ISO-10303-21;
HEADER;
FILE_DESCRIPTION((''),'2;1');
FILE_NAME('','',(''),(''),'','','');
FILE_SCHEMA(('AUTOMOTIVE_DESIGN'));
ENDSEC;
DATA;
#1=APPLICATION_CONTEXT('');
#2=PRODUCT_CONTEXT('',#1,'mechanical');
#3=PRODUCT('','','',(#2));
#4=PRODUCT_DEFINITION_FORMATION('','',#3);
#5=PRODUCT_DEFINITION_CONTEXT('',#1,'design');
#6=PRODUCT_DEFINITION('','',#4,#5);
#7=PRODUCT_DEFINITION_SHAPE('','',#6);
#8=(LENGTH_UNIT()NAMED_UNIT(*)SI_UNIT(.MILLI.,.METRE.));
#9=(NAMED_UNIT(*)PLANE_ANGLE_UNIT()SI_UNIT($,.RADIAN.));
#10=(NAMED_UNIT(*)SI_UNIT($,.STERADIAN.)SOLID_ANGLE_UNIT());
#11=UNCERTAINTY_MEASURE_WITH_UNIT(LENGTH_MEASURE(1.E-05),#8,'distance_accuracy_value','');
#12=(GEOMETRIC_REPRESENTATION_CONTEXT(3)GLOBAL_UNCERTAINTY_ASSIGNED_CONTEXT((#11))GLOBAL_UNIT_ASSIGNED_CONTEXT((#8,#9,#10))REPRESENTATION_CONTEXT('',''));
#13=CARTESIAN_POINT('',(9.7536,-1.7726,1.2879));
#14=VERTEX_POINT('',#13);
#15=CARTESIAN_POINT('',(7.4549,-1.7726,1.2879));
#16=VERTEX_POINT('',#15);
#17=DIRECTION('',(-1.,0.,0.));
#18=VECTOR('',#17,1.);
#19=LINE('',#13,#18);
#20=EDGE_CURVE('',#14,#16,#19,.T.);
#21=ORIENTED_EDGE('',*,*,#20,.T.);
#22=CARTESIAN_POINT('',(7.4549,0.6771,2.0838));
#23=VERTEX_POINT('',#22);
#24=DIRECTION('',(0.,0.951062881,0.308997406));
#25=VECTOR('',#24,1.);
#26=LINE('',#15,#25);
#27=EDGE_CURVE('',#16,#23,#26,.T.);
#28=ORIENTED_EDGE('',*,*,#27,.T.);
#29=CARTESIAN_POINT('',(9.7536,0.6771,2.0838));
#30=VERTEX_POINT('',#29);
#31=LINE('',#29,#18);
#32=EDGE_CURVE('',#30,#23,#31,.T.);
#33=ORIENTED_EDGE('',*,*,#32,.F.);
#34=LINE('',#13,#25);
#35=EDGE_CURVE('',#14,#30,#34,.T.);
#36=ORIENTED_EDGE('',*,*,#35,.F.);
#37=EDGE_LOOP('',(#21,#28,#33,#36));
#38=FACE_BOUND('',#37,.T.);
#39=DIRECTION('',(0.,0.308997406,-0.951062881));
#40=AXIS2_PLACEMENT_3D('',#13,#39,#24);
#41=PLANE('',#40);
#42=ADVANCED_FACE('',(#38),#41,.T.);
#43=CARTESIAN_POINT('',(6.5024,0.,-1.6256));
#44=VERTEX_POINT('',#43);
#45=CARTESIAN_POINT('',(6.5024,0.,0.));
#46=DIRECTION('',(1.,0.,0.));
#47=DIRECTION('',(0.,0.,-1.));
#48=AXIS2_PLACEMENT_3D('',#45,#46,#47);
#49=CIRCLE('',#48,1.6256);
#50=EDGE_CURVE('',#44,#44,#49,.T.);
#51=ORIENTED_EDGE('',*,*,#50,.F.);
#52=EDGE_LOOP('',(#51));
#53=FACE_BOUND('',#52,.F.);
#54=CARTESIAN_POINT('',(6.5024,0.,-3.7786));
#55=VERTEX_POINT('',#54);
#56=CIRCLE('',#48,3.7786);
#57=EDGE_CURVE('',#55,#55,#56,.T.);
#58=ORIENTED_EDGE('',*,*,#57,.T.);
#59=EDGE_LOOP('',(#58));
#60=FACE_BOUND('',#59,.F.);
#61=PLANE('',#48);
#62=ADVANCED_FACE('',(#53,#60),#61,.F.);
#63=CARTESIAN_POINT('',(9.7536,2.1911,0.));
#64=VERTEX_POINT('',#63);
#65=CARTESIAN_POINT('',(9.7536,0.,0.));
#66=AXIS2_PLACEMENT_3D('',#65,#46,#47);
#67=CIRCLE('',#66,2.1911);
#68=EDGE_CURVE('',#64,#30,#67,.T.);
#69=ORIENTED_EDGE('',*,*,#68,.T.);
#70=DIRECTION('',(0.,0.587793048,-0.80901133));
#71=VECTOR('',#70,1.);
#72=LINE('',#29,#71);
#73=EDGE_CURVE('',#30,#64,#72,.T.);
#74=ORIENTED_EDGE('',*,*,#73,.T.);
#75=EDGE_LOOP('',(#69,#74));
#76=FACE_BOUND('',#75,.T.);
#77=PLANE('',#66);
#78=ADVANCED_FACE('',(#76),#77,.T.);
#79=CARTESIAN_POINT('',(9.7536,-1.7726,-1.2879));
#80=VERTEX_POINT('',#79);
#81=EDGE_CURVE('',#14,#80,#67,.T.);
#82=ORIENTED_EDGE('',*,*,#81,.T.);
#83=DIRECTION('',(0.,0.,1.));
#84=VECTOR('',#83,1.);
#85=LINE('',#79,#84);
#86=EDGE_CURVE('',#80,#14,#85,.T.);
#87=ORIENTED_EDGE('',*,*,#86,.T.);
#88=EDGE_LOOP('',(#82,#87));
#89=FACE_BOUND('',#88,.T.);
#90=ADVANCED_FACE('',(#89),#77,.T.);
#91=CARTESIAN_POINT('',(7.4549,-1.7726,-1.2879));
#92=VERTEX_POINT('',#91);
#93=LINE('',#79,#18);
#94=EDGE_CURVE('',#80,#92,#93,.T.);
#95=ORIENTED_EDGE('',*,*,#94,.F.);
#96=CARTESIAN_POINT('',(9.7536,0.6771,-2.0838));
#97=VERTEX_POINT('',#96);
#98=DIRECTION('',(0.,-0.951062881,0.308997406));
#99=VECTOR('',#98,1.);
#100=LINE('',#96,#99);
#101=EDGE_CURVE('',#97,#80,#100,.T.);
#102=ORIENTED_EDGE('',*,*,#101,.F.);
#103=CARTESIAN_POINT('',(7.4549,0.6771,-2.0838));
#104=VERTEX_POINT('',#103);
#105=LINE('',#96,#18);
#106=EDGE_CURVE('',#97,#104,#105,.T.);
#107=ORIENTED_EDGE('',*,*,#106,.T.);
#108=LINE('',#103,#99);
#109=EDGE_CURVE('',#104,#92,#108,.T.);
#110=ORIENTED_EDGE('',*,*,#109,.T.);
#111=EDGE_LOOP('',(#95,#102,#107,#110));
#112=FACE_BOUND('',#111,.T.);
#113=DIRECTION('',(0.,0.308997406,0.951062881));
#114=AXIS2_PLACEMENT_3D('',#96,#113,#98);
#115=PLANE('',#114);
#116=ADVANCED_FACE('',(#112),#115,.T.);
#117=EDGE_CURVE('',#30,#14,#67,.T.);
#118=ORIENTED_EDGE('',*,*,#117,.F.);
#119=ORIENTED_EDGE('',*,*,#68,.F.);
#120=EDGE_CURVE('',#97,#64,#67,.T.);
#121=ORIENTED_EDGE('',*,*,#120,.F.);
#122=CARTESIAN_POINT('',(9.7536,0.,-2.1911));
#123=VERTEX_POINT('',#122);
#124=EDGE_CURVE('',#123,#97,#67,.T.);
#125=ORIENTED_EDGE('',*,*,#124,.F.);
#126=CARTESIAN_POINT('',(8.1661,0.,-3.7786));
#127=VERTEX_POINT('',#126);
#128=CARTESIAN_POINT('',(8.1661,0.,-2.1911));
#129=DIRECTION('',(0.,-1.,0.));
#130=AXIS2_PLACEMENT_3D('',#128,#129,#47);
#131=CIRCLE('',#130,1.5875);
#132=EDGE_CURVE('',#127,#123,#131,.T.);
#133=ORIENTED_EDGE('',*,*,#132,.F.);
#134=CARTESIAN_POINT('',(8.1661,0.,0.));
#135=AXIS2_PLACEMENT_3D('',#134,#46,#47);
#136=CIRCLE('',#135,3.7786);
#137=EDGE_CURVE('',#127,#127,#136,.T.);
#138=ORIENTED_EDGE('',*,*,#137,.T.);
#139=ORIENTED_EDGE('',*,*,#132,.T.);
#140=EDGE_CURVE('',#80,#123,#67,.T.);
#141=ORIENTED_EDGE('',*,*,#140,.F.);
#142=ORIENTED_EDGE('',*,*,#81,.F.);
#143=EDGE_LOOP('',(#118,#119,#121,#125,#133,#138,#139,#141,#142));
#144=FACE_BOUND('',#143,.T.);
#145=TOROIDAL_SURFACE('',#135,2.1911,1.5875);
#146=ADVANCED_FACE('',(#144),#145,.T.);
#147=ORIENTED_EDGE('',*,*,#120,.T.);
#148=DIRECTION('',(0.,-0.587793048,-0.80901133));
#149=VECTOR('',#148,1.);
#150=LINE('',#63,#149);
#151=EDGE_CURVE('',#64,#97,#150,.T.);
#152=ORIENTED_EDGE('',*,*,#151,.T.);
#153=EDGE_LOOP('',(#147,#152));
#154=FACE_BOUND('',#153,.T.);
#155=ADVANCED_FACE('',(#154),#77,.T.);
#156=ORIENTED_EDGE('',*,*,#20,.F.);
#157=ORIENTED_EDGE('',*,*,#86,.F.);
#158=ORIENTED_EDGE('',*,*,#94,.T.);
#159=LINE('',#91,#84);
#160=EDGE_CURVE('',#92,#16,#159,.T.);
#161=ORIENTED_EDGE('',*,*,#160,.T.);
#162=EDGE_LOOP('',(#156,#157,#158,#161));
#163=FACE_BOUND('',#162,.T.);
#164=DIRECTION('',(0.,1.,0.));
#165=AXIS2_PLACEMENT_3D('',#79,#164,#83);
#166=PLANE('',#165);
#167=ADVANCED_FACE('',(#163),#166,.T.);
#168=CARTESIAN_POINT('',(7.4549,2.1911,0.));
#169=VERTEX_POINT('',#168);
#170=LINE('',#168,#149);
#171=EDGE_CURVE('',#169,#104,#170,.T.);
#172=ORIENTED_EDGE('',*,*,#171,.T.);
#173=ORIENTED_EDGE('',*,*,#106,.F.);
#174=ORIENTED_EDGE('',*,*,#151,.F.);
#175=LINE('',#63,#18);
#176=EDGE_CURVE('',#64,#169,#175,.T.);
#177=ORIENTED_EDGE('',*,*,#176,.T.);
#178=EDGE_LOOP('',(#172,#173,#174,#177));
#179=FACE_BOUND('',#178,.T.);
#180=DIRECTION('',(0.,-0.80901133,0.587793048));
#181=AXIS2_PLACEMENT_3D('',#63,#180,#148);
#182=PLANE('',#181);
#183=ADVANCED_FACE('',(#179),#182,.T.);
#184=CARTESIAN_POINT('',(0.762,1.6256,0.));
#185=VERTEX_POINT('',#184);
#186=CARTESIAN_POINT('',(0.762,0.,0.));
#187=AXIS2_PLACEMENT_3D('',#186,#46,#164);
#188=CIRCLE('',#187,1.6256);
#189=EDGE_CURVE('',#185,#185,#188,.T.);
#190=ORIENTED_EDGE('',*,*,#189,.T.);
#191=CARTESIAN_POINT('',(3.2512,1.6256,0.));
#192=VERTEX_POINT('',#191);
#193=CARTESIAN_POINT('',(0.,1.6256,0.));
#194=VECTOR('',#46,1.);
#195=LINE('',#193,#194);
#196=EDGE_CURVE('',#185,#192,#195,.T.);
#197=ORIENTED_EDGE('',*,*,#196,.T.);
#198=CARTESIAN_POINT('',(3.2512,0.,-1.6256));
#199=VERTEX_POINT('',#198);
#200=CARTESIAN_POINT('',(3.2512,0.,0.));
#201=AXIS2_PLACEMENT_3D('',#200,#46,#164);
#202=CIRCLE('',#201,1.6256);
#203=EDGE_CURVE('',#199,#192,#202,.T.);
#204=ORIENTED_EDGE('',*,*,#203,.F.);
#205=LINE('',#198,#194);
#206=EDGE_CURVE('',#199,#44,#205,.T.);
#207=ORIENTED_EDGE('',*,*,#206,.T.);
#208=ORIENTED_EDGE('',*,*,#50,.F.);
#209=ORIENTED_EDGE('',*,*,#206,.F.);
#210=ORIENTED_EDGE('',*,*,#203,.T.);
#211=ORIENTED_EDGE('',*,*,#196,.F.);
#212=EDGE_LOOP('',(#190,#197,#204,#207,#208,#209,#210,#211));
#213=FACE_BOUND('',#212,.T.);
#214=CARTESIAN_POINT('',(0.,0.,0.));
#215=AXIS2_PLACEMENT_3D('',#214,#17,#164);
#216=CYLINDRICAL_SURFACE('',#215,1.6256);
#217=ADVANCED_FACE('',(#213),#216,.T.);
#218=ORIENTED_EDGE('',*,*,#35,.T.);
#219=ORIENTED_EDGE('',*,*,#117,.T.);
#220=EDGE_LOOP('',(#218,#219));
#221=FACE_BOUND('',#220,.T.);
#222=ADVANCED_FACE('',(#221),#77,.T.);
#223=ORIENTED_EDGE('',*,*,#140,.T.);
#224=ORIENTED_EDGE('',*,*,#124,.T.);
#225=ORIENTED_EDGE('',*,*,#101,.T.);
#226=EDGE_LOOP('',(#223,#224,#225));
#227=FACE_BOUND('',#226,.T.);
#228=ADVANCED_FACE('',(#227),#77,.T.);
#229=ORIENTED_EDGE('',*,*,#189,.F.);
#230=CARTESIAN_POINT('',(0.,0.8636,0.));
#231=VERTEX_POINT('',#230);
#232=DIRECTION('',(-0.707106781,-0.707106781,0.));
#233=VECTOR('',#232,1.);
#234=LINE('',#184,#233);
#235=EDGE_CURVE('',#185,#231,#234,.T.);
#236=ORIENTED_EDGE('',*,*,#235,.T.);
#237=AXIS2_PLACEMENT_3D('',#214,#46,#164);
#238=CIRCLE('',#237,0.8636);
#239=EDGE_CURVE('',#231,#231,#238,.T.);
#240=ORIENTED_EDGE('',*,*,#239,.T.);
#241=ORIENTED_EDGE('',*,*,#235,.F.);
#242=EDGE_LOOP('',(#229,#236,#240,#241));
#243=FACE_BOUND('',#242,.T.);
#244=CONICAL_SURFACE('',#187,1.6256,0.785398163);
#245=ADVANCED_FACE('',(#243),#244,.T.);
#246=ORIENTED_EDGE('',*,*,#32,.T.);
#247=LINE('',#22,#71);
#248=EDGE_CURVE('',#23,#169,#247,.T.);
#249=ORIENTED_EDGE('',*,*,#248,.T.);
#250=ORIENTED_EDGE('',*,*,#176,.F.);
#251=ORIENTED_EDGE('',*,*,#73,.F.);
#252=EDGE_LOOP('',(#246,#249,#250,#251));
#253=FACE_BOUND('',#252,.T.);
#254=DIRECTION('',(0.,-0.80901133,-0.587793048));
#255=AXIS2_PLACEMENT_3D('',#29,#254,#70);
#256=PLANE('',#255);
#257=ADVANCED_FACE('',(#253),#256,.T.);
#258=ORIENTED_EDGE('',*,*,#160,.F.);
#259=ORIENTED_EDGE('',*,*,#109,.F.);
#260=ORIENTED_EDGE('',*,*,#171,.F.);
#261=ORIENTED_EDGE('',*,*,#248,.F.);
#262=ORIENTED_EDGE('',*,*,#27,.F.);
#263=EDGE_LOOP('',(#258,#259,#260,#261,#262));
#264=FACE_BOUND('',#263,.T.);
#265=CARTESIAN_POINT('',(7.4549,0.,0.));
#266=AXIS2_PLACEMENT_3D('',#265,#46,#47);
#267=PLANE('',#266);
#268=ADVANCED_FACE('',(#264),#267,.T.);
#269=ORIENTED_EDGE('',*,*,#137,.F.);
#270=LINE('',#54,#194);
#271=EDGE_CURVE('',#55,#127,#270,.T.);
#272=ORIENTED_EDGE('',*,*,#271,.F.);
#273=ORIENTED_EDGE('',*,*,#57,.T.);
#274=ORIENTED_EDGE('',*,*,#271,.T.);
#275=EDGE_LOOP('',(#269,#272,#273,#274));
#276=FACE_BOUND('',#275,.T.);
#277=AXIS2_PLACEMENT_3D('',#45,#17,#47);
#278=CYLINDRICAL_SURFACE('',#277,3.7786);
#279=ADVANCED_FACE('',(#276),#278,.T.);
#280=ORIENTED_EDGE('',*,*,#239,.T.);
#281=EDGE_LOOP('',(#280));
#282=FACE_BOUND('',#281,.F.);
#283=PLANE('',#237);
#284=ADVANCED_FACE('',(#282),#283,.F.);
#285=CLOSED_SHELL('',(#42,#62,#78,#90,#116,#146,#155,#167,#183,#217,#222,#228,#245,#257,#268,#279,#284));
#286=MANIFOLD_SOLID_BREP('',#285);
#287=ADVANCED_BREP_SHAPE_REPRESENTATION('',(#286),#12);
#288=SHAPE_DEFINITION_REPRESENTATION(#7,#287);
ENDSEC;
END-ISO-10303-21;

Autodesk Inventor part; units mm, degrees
ref_plane "YZ Plane" through (0, 0, 0) normal (1, 0, 0) x (0, 1, 0)
ref_plane "XZ Plane" through (0, 0, 0) normal (0, 1, 0) x (-1, 0, 0)
ref_plane "XY Plane" through (0, 0, 0) normal (0, 0, 1) x (1, 0, 0)
sketch "Sketch1" plane through (0, 0, 0) normal (1, 0, 0) x (0, 1, 0)
  circle A0 centre (0, 0) radius 1.6256
  dimension "d0" = 3.2512
extrude "Extrusion1" add sketch "Sketch1" along normal blind 3.2512
thread "Thread1" size "6-32 UNC" class "2A" standard "ANSI Unified Screw Threads" full length
sketch "Sketch2" plane through (3.2512, 0, 0) normal (1, 0, 0) x (0, 0, -1)
  circle A0 centre (0, 0) radius 1.6256
extrude "Extrusion2" add sketch "Sketch2" along normal blind 3.2512
sketch "Sketch3" plane through (6.5024, 0, 0) normal (1, 0, 0) x (0, 0, -1)
  circle A0 centre (0, 0) radius 3.7786
extrude "Extrusion3" add sketch "Sketch3" along normal blind 3.2512
fillet "Fillet1" radius 1.5875 1 edges at (9.7536, 0, 3.7786)
sketch "Sketch4" plane through (9.7536, 0, 0) normal (1, 0, 0) x (0, 0, -1)
  circle A0 centre (0, 0) radius 2.1911 projected
  line L0 (0, 2.1911) -> (2.0838, 0.6771)
  line L1 (2.0838, 0.6771) -> (1.2879, -1.7726)
  line L2 (1.2879, -1.7726) -> (-1.2879, -1.7726)
  line L3 (-1.2879, -1.7726) -> (-2.0838, 0.6771)
  line L4 (-2.0838, 0.6771) -> (0, 2.1911)
extrude "Extrusion4" cut sketch "Sketch4" against normal blind 2.2987 contours L1 L2 L3 L4 L0
chamfer "Chamfer1" distance 0.762 angle 45 1 edges at (0, -1.6256, 0)
properties part number "hex nut"
